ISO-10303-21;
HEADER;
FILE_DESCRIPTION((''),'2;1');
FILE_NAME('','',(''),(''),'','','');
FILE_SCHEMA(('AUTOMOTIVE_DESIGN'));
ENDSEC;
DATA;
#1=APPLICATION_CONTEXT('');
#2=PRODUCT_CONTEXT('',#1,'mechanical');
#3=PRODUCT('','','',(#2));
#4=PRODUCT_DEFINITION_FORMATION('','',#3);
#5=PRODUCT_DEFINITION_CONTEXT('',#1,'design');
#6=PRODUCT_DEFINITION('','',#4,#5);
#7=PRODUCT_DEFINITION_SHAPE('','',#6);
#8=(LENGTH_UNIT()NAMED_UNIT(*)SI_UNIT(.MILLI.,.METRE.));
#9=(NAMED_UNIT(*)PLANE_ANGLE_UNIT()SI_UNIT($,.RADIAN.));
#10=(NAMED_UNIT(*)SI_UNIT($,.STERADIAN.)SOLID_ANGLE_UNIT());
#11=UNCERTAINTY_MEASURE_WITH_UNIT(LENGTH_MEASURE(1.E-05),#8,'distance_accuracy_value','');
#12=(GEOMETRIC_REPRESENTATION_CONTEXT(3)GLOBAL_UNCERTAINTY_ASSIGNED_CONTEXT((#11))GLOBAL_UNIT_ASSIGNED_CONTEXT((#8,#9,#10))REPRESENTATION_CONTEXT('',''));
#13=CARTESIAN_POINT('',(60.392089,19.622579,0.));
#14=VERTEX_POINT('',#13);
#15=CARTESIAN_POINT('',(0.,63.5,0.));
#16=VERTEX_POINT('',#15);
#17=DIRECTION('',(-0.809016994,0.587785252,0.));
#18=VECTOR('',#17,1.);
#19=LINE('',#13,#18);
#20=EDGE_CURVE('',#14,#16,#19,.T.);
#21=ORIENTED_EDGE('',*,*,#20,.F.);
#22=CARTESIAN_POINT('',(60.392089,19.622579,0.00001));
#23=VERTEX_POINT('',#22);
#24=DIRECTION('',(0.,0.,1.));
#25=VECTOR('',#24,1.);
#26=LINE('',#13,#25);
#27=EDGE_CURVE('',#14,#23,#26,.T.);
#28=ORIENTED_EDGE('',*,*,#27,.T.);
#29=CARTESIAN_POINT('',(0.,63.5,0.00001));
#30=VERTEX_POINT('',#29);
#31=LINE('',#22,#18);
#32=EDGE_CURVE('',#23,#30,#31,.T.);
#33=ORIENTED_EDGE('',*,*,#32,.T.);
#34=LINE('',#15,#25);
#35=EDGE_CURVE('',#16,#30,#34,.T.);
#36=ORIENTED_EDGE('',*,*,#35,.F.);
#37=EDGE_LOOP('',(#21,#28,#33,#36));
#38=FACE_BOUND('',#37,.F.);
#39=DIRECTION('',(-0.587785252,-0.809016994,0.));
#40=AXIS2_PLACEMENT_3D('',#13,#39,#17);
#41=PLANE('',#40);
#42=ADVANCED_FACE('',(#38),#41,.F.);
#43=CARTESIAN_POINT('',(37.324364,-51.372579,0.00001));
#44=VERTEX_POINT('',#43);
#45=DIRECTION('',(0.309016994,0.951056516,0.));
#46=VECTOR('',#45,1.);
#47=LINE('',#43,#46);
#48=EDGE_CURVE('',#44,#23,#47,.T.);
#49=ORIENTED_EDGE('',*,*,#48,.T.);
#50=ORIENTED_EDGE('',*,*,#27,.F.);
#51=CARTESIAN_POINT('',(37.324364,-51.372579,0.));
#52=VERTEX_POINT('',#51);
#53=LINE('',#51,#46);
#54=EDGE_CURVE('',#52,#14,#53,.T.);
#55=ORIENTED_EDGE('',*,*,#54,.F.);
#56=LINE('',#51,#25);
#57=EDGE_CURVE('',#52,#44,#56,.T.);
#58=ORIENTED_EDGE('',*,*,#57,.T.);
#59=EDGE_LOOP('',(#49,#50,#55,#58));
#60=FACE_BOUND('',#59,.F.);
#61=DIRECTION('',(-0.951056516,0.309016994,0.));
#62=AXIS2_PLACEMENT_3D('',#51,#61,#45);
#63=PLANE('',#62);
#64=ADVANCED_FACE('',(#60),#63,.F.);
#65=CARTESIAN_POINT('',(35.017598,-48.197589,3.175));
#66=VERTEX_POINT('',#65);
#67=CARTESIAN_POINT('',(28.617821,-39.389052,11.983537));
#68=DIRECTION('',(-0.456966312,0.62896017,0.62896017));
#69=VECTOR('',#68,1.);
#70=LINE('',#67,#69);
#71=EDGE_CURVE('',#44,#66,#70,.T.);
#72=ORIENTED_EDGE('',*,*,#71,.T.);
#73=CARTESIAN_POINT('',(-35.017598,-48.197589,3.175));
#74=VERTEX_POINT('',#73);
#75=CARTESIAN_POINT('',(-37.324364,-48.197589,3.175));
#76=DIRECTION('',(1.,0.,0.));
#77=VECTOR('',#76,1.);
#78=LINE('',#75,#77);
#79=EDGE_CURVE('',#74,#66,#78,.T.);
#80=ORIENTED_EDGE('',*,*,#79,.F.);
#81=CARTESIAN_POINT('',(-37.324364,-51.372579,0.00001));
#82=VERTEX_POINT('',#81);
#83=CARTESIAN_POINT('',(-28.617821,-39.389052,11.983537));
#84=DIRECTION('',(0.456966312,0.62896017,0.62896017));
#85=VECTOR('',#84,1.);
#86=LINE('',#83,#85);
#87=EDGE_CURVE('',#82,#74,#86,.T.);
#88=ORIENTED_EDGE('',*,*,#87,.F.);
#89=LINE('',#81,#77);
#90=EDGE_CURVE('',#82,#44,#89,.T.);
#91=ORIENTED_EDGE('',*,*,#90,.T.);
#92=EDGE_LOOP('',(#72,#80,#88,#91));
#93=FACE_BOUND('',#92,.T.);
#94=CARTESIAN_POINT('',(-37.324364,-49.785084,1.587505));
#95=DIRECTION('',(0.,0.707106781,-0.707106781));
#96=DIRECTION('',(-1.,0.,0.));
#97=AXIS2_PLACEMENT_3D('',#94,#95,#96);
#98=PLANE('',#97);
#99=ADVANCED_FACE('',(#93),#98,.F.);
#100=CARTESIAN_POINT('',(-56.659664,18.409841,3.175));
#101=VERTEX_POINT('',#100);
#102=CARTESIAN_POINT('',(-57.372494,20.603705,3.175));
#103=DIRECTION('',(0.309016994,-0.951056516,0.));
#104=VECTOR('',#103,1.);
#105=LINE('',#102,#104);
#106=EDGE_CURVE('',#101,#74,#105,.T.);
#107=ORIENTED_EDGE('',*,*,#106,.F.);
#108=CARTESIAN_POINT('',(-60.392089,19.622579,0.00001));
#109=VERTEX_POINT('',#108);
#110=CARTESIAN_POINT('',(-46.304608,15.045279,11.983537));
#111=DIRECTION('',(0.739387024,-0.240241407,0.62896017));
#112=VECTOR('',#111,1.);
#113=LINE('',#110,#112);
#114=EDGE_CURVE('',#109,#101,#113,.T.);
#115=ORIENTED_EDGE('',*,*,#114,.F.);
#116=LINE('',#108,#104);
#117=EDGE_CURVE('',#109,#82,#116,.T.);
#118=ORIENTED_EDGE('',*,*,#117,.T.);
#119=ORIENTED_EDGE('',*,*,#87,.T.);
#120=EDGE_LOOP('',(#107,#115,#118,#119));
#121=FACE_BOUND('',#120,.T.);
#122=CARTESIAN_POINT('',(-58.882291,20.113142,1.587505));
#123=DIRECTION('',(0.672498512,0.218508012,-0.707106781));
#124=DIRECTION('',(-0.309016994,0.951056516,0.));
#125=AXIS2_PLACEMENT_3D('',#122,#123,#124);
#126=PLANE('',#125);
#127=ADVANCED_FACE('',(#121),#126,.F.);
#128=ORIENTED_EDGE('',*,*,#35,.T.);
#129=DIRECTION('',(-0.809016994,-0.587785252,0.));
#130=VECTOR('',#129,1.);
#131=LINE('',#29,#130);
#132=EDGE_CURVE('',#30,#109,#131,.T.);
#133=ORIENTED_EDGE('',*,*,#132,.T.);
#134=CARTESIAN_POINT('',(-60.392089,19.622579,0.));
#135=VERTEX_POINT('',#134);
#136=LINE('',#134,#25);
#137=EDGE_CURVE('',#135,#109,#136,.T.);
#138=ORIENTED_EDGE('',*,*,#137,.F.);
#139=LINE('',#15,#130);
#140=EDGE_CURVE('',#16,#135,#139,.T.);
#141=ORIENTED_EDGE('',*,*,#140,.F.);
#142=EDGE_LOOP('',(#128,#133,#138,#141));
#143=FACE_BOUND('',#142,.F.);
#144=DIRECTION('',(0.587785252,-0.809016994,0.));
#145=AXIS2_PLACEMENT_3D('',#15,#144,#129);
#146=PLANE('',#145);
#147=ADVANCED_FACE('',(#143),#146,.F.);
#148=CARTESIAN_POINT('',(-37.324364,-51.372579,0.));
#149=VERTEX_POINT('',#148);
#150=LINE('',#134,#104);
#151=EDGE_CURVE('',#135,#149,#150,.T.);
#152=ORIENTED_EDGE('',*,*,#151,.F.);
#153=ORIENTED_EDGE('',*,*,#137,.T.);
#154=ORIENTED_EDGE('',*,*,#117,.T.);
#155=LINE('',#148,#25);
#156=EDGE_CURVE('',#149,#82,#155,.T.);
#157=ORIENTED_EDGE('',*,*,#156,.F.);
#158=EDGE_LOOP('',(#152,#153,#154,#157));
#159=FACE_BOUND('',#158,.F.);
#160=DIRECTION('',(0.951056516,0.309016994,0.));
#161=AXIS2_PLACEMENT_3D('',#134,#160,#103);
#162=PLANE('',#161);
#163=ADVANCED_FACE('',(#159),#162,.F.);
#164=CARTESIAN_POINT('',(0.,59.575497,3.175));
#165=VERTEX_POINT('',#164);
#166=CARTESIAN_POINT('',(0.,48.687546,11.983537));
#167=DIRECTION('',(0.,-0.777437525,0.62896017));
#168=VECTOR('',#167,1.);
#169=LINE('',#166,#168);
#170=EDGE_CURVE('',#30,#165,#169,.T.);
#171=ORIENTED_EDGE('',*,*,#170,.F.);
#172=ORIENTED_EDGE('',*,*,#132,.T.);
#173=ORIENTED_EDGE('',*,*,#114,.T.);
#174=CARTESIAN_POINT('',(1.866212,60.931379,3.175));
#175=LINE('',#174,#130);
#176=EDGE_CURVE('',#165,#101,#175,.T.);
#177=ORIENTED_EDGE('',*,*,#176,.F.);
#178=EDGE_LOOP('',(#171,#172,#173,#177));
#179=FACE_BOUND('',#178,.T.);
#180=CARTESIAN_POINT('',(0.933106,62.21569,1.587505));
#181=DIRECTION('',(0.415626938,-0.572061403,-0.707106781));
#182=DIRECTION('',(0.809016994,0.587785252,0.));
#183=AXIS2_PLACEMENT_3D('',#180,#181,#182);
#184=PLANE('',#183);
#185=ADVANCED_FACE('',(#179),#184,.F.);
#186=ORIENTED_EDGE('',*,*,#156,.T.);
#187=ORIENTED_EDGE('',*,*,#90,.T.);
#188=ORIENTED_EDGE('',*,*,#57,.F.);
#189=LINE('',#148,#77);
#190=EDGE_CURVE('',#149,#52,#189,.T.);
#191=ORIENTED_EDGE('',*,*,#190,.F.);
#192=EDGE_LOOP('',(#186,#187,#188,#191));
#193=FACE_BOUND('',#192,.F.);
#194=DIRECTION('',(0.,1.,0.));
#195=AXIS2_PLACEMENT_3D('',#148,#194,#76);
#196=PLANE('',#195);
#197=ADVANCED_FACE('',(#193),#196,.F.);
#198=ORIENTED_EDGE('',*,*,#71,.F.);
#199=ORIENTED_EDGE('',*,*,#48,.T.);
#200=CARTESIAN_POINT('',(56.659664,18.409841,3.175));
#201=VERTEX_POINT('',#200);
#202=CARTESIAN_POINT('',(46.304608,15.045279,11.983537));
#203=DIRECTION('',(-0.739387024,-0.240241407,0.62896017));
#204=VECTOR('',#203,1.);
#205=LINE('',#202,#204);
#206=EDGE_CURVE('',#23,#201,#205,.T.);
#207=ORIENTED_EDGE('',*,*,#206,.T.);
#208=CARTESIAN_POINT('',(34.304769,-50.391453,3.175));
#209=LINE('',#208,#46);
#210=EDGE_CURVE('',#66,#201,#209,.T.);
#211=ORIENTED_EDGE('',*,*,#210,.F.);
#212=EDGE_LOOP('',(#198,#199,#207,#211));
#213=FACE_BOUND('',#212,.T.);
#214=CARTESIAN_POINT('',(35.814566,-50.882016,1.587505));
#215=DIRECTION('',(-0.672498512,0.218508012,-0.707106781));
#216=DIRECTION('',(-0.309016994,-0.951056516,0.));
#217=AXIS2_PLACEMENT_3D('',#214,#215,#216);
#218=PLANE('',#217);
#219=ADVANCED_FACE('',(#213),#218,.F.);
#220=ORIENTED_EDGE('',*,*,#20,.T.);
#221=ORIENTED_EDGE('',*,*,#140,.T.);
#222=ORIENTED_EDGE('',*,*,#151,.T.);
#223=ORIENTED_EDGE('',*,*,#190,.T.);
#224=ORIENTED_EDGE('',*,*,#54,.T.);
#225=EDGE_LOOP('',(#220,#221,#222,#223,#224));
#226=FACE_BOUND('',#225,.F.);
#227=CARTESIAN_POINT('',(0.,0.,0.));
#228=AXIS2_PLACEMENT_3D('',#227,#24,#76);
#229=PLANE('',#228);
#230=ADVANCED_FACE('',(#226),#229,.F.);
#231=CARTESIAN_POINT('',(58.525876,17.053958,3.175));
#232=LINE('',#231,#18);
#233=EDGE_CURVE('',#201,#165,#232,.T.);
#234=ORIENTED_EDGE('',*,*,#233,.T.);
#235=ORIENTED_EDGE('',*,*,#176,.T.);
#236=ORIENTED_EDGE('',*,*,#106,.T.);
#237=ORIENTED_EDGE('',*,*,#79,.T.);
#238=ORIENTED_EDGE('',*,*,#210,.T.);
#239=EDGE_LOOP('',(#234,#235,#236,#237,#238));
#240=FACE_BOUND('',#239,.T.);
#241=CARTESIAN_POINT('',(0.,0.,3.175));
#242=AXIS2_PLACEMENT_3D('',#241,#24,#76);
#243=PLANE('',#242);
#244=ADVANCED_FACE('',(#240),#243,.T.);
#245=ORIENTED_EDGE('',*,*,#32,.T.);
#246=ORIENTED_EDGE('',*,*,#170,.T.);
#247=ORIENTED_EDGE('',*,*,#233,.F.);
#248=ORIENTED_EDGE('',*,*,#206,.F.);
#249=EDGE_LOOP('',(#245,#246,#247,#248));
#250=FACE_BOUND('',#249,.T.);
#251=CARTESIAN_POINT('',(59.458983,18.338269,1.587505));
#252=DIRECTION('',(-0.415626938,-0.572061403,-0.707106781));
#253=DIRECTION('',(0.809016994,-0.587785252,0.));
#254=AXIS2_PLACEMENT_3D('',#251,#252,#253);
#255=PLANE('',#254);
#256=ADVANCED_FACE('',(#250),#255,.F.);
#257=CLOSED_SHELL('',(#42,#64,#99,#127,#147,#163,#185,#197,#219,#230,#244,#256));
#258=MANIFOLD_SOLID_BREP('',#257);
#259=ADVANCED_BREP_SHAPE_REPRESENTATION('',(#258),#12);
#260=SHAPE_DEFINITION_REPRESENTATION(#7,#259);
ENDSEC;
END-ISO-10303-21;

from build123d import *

# Parameters (mm, degrees)
F1_DEPTH = 3.175
F2_SIZE  = 3.17499


# Not quite as in the source:
# - a fillet or chamfer is up to 0.001 mm smaller than in the source, because OpenCascade refuses the exact size


with BuildPart() as f1:
    # F0 (on Top) → F1 (new body)
    with BuildSketch(Plane.XY):
        Polygon((60.3920887847, 19.6225791428), (0, 63.5), (-60.3920887847, 19.6225791428), (-37.3243635206, -51.3725791428), (37.3243635206, -51.3725791428), align=None)
    extrude(amount=F1_DEPTH)

    # F2 (size 3.175 in the source; OpenCascade refuses exactly that, so slightly less here)
    f2_edges = [f1.edges().sort_by_distance(p)[0] for p in [
        (30.196044, 41.56129, 3.175),
        (-30.196044, 41.56129, 3.175),
        (-48.858226, -15.875, 3.175),
        (0, -51.372579, 3.175),
        (48.858226, -15.875, 3.175),
    ]]
    chamfer(f2_edges, length=F2_SIZE)


solid = f1.part
